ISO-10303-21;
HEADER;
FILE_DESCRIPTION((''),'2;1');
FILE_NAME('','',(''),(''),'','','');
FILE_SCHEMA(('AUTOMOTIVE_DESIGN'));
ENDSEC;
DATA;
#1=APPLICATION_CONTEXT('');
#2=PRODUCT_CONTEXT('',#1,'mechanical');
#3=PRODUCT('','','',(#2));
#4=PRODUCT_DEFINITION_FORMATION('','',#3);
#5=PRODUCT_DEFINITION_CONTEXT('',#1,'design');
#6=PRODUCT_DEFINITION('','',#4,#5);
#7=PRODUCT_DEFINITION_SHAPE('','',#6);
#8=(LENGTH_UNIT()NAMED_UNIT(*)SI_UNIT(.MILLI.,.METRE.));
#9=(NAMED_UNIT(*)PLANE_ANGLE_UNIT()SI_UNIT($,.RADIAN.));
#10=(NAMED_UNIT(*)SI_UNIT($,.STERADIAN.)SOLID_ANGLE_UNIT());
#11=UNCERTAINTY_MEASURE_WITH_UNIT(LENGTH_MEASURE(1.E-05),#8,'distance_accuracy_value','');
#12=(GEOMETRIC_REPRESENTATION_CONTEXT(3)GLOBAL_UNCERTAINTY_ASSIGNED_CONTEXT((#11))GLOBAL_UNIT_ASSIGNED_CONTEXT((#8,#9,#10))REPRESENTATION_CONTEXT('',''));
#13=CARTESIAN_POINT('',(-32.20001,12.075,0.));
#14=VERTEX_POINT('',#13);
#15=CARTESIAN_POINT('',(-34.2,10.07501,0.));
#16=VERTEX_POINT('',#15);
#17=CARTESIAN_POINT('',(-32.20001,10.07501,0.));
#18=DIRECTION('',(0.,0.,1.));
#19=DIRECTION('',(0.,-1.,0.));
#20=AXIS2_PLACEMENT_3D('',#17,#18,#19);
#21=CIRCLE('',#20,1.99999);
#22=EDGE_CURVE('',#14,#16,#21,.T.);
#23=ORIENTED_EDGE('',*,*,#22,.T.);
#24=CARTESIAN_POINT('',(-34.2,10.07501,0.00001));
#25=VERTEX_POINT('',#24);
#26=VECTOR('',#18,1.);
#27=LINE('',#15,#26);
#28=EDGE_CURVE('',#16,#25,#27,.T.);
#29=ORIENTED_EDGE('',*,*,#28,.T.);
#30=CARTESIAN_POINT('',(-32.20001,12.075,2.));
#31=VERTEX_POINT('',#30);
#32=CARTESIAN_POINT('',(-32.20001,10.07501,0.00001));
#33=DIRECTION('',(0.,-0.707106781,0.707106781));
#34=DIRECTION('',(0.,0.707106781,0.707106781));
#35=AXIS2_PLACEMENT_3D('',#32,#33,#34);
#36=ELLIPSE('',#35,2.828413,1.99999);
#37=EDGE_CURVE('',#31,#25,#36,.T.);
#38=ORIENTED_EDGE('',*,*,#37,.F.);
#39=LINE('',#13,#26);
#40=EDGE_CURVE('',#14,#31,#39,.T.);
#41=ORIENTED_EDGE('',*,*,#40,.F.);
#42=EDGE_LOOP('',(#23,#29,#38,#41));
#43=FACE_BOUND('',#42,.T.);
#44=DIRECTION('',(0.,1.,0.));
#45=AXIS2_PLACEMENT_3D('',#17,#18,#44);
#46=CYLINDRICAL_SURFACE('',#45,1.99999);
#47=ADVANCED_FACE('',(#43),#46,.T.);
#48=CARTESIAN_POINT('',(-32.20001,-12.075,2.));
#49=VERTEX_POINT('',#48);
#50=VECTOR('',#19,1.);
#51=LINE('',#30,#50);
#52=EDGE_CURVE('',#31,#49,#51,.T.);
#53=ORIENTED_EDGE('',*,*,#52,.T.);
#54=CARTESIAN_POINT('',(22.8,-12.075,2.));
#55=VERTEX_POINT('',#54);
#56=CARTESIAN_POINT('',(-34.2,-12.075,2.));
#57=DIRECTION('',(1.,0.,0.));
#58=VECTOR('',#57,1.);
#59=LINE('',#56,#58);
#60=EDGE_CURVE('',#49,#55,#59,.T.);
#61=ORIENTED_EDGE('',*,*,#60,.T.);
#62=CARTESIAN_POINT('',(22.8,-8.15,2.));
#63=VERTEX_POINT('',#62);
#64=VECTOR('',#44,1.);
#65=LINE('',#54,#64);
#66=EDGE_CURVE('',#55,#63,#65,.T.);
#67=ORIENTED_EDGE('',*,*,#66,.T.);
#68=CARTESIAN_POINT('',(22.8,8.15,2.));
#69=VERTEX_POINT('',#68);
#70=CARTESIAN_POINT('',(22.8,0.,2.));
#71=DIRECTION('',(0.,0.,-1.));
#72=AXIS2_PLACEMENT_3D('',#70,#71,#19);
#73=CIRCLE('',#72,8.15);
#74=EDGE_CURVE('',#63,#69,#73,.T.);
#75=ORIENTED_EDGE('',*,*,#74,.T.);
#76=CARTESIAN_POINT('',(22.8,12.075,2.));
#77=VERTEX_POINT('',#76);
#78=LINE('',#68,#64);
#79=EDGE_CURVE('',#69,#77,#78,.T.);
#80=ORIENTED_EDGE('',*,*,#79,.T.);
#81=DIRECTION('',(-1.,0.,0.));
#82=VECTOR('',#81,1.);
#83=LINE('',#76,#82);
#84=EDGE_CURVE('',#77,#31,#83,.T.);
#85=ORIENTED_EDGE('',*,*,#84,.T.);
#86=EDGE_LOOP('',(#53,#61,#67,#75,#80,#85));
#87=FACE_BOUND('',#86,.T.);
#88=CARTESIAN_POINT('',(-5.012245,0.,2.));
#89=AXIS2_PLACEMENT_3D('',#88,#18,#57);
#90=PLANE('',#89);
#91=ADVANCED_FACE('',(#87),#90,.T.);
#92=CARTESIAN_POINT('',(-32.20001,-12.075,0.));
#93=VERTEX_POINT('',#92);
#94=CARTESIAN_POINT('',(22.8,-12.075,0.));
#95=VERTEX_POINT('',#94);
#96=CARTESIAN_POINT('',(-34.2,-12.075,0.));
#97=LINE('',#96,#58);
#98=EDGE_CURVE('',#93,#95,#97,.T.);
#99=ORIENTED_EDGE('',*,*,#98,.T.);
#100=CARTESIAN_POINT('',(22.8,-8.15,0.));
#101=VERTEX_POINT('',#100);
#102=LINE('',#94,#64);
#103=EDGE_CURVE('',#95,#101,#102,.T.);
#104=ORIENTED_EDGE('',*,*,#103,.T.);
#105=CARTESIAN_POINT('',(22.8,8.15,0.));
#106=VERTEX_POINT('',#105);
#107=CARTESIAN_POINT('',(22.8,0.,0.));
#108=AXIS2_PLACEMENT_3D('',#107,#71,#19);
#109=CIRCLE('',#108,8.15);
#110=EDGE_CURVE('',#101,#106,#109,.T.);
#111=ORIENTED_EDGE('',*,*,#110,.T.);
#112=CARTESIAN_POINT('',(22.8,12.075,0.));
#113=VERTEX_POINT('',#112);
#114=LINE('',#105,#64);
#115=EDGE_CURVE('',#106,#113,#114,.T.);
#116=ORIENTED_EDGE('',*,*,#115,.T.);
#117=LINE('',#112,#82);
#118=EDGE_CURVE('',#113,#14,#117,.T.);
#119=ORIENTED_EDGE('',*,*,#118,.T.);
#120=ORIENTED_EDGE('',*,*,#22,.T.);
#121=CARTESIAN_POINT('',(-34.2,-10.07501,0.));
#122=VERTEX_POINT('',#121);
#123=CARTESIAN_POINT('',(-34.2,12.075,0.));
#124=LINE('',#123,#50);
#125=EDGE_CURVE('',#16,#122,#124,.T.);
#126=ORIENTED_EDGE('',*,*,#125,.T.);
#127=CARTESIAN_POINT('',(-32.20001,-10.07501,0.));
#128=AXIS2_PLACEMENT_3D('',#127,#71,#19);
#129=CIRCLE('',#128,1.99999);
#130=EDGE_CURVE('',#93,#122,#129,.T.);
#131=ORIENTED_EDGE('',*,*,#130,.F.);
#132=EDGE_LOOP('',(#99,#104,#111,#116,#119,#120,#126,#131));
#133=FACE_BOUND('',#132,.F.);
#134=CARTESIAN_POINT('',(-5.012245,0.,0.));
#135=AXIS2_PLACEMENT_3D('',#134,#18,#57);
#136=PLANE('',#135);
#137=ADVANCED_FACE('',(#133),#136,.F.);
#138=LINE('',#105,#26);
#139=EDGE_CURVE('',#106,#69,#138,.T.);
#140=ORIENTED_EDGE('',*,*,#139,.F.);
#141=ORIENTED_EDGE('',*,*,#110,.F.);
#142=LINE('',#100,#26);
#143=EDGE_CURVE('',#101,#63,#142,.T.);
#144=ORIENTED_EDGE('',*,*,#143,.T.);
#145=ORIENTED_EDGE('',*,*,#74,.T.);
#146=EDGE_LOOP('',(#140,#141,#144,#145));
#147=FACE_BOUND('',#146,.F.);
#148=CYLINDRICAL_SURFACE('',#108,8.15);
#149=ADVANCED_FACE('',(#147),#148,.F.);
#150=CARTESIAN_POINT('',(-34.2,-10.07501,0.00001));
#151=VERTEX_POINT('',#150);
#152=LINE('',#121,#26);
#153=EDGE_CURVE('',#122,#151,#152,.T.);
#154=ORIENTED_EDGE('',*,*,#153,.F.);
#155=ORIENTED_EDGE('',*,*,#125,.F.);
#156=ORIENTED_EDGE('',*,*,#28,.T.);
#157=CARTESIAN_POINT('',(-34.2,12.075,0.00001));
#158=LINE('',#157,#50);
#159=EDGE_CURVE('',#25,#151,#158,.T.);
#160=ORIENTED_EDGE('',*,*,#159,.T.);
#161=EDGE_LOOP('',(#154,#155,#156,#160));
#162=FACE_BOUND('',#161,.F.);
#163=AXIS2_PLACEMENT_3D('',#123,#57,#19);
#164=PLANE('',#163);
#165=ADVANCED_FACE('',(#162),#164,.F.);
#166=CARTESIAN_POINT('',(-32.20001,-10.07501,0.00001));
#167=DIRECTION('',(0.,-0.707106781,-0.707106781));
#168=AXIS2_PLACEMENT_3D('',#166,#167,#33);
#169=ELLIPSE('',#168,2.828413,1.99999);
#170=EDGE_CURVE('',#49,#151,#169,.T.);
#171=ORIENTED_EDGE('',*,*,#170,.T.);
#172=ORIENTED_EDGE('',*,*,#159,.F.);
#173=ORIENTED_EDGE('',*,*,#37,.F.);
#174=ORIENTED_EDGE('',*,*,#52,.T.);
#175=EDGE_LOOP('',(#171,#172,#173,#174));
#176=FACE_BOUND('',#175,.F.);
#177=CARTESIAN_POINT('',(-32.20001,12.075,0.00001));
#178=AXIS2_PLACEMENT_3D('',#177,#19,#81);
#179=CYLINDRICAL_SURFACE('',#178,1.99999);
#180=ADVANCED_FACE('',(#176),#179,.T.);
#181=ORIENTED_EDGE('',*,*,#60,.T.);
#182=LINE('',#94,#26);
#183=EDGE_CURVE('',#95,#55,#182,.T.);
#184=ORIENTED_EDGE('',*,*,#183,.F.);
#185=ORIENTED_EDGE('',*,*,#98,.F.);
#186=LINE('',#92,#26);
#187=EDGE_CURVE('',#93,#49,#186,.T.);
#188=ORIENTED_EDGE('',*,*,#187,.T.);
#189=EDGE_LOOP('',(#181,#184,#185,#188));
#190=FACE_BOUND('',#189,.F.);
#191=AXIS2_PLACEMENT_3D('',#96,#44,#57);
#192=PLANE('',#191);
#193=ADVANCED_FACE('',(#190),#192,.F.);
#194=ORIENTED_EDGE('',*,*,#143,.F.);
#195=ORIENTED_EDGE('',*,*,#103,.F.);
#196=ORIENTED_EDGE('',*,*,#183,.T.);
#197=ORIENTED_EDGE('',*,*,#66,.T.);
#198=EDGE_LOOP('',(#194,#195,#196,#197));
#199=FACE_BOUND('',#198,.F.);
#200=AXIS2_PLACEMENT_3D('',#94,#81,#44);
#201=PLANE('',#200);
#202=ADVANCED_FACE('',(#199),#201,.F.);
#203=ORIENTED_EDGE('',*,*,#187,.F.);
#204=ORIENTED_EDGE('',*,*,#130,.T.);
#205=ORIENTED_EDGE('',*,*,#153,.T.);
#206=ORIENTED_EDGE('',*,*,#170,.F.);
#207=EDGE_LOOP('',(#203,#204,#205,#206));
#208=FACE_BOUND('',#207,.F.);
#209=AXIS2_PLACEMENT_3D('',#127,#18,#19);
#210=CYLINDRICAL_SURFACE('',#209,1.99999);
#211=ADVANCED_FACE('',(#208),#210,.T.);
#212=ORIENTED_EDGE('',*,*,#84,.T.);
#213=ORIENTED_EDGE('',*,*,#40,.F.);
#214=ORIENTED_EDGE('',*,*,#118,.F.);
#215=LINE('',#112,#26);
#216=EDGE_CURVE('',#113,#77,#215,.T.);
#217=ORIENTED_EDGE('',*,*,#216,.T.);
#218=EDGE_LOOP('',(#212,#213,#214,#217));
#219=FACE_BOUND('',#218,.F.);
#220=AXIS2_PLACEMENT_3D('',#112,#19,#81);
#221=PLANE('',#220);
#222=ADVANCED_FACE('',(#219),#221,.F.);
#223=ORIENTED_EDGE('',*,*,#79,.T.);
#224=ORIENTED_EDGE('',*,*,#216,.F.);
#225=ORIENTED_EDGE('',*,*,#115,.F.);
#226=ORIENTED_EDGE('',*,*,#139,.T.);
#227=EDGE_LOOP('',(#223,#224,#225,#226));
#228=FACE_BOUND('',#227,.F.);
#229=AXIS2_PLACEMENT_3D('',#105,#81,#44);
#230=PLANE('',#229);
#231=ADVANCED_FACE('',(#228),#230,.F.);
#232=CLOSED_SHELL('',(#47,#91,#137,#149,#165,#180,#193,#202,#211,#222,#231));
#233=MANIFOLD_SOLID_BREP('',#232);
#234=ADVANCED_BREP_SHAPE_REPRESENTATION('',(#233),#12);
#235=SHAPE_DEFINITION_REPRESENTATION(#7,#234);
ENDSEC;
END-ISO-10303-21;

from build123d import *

# Parameters (mm, degrees)
F1_DEPTH = 2
F2_R     = 1.99999


# Not quite as in the source:
# - a fillet or chamfer is up to 0.001 mm smaller than in the source, because OpenCascade refuses the exact size


with BuildPart() as f1:
    # F0 (on Top) → F1 (new body)
    with BuildSketch(Plane.XY):
        with BuildLine():
            Line((-34.2, -12.075), (22.8, -12.075))
            Line((22.8, -12.075), (22.8, -8.15))
            ThreePointArc((22.8, -8.15), (14.65, 0), (22.8, 8.15))
            Line((22.8, 8.15), (22.8, 12.075))
            Line((22.8, 12.075), (-34.2, 12.075))
            Line((-34.2, 12.075), (-34.2, -12.075))
        make_face()
    extrude(amount=F1_DEPTH)

    # F2 (radius 2 in the source; OpenCascade refuses exactly that, so slightly less here)
    f2_edges = [f1.edges().sort_by_distance(p)[0] for p in [
        (-34.2, -12.075, 1),
        (-34.2, 12.075, 1),
        (-34.2, 0, 2),
    ]]
    fillet(f2_edges, radius=F2_R)


solid = f1.part
